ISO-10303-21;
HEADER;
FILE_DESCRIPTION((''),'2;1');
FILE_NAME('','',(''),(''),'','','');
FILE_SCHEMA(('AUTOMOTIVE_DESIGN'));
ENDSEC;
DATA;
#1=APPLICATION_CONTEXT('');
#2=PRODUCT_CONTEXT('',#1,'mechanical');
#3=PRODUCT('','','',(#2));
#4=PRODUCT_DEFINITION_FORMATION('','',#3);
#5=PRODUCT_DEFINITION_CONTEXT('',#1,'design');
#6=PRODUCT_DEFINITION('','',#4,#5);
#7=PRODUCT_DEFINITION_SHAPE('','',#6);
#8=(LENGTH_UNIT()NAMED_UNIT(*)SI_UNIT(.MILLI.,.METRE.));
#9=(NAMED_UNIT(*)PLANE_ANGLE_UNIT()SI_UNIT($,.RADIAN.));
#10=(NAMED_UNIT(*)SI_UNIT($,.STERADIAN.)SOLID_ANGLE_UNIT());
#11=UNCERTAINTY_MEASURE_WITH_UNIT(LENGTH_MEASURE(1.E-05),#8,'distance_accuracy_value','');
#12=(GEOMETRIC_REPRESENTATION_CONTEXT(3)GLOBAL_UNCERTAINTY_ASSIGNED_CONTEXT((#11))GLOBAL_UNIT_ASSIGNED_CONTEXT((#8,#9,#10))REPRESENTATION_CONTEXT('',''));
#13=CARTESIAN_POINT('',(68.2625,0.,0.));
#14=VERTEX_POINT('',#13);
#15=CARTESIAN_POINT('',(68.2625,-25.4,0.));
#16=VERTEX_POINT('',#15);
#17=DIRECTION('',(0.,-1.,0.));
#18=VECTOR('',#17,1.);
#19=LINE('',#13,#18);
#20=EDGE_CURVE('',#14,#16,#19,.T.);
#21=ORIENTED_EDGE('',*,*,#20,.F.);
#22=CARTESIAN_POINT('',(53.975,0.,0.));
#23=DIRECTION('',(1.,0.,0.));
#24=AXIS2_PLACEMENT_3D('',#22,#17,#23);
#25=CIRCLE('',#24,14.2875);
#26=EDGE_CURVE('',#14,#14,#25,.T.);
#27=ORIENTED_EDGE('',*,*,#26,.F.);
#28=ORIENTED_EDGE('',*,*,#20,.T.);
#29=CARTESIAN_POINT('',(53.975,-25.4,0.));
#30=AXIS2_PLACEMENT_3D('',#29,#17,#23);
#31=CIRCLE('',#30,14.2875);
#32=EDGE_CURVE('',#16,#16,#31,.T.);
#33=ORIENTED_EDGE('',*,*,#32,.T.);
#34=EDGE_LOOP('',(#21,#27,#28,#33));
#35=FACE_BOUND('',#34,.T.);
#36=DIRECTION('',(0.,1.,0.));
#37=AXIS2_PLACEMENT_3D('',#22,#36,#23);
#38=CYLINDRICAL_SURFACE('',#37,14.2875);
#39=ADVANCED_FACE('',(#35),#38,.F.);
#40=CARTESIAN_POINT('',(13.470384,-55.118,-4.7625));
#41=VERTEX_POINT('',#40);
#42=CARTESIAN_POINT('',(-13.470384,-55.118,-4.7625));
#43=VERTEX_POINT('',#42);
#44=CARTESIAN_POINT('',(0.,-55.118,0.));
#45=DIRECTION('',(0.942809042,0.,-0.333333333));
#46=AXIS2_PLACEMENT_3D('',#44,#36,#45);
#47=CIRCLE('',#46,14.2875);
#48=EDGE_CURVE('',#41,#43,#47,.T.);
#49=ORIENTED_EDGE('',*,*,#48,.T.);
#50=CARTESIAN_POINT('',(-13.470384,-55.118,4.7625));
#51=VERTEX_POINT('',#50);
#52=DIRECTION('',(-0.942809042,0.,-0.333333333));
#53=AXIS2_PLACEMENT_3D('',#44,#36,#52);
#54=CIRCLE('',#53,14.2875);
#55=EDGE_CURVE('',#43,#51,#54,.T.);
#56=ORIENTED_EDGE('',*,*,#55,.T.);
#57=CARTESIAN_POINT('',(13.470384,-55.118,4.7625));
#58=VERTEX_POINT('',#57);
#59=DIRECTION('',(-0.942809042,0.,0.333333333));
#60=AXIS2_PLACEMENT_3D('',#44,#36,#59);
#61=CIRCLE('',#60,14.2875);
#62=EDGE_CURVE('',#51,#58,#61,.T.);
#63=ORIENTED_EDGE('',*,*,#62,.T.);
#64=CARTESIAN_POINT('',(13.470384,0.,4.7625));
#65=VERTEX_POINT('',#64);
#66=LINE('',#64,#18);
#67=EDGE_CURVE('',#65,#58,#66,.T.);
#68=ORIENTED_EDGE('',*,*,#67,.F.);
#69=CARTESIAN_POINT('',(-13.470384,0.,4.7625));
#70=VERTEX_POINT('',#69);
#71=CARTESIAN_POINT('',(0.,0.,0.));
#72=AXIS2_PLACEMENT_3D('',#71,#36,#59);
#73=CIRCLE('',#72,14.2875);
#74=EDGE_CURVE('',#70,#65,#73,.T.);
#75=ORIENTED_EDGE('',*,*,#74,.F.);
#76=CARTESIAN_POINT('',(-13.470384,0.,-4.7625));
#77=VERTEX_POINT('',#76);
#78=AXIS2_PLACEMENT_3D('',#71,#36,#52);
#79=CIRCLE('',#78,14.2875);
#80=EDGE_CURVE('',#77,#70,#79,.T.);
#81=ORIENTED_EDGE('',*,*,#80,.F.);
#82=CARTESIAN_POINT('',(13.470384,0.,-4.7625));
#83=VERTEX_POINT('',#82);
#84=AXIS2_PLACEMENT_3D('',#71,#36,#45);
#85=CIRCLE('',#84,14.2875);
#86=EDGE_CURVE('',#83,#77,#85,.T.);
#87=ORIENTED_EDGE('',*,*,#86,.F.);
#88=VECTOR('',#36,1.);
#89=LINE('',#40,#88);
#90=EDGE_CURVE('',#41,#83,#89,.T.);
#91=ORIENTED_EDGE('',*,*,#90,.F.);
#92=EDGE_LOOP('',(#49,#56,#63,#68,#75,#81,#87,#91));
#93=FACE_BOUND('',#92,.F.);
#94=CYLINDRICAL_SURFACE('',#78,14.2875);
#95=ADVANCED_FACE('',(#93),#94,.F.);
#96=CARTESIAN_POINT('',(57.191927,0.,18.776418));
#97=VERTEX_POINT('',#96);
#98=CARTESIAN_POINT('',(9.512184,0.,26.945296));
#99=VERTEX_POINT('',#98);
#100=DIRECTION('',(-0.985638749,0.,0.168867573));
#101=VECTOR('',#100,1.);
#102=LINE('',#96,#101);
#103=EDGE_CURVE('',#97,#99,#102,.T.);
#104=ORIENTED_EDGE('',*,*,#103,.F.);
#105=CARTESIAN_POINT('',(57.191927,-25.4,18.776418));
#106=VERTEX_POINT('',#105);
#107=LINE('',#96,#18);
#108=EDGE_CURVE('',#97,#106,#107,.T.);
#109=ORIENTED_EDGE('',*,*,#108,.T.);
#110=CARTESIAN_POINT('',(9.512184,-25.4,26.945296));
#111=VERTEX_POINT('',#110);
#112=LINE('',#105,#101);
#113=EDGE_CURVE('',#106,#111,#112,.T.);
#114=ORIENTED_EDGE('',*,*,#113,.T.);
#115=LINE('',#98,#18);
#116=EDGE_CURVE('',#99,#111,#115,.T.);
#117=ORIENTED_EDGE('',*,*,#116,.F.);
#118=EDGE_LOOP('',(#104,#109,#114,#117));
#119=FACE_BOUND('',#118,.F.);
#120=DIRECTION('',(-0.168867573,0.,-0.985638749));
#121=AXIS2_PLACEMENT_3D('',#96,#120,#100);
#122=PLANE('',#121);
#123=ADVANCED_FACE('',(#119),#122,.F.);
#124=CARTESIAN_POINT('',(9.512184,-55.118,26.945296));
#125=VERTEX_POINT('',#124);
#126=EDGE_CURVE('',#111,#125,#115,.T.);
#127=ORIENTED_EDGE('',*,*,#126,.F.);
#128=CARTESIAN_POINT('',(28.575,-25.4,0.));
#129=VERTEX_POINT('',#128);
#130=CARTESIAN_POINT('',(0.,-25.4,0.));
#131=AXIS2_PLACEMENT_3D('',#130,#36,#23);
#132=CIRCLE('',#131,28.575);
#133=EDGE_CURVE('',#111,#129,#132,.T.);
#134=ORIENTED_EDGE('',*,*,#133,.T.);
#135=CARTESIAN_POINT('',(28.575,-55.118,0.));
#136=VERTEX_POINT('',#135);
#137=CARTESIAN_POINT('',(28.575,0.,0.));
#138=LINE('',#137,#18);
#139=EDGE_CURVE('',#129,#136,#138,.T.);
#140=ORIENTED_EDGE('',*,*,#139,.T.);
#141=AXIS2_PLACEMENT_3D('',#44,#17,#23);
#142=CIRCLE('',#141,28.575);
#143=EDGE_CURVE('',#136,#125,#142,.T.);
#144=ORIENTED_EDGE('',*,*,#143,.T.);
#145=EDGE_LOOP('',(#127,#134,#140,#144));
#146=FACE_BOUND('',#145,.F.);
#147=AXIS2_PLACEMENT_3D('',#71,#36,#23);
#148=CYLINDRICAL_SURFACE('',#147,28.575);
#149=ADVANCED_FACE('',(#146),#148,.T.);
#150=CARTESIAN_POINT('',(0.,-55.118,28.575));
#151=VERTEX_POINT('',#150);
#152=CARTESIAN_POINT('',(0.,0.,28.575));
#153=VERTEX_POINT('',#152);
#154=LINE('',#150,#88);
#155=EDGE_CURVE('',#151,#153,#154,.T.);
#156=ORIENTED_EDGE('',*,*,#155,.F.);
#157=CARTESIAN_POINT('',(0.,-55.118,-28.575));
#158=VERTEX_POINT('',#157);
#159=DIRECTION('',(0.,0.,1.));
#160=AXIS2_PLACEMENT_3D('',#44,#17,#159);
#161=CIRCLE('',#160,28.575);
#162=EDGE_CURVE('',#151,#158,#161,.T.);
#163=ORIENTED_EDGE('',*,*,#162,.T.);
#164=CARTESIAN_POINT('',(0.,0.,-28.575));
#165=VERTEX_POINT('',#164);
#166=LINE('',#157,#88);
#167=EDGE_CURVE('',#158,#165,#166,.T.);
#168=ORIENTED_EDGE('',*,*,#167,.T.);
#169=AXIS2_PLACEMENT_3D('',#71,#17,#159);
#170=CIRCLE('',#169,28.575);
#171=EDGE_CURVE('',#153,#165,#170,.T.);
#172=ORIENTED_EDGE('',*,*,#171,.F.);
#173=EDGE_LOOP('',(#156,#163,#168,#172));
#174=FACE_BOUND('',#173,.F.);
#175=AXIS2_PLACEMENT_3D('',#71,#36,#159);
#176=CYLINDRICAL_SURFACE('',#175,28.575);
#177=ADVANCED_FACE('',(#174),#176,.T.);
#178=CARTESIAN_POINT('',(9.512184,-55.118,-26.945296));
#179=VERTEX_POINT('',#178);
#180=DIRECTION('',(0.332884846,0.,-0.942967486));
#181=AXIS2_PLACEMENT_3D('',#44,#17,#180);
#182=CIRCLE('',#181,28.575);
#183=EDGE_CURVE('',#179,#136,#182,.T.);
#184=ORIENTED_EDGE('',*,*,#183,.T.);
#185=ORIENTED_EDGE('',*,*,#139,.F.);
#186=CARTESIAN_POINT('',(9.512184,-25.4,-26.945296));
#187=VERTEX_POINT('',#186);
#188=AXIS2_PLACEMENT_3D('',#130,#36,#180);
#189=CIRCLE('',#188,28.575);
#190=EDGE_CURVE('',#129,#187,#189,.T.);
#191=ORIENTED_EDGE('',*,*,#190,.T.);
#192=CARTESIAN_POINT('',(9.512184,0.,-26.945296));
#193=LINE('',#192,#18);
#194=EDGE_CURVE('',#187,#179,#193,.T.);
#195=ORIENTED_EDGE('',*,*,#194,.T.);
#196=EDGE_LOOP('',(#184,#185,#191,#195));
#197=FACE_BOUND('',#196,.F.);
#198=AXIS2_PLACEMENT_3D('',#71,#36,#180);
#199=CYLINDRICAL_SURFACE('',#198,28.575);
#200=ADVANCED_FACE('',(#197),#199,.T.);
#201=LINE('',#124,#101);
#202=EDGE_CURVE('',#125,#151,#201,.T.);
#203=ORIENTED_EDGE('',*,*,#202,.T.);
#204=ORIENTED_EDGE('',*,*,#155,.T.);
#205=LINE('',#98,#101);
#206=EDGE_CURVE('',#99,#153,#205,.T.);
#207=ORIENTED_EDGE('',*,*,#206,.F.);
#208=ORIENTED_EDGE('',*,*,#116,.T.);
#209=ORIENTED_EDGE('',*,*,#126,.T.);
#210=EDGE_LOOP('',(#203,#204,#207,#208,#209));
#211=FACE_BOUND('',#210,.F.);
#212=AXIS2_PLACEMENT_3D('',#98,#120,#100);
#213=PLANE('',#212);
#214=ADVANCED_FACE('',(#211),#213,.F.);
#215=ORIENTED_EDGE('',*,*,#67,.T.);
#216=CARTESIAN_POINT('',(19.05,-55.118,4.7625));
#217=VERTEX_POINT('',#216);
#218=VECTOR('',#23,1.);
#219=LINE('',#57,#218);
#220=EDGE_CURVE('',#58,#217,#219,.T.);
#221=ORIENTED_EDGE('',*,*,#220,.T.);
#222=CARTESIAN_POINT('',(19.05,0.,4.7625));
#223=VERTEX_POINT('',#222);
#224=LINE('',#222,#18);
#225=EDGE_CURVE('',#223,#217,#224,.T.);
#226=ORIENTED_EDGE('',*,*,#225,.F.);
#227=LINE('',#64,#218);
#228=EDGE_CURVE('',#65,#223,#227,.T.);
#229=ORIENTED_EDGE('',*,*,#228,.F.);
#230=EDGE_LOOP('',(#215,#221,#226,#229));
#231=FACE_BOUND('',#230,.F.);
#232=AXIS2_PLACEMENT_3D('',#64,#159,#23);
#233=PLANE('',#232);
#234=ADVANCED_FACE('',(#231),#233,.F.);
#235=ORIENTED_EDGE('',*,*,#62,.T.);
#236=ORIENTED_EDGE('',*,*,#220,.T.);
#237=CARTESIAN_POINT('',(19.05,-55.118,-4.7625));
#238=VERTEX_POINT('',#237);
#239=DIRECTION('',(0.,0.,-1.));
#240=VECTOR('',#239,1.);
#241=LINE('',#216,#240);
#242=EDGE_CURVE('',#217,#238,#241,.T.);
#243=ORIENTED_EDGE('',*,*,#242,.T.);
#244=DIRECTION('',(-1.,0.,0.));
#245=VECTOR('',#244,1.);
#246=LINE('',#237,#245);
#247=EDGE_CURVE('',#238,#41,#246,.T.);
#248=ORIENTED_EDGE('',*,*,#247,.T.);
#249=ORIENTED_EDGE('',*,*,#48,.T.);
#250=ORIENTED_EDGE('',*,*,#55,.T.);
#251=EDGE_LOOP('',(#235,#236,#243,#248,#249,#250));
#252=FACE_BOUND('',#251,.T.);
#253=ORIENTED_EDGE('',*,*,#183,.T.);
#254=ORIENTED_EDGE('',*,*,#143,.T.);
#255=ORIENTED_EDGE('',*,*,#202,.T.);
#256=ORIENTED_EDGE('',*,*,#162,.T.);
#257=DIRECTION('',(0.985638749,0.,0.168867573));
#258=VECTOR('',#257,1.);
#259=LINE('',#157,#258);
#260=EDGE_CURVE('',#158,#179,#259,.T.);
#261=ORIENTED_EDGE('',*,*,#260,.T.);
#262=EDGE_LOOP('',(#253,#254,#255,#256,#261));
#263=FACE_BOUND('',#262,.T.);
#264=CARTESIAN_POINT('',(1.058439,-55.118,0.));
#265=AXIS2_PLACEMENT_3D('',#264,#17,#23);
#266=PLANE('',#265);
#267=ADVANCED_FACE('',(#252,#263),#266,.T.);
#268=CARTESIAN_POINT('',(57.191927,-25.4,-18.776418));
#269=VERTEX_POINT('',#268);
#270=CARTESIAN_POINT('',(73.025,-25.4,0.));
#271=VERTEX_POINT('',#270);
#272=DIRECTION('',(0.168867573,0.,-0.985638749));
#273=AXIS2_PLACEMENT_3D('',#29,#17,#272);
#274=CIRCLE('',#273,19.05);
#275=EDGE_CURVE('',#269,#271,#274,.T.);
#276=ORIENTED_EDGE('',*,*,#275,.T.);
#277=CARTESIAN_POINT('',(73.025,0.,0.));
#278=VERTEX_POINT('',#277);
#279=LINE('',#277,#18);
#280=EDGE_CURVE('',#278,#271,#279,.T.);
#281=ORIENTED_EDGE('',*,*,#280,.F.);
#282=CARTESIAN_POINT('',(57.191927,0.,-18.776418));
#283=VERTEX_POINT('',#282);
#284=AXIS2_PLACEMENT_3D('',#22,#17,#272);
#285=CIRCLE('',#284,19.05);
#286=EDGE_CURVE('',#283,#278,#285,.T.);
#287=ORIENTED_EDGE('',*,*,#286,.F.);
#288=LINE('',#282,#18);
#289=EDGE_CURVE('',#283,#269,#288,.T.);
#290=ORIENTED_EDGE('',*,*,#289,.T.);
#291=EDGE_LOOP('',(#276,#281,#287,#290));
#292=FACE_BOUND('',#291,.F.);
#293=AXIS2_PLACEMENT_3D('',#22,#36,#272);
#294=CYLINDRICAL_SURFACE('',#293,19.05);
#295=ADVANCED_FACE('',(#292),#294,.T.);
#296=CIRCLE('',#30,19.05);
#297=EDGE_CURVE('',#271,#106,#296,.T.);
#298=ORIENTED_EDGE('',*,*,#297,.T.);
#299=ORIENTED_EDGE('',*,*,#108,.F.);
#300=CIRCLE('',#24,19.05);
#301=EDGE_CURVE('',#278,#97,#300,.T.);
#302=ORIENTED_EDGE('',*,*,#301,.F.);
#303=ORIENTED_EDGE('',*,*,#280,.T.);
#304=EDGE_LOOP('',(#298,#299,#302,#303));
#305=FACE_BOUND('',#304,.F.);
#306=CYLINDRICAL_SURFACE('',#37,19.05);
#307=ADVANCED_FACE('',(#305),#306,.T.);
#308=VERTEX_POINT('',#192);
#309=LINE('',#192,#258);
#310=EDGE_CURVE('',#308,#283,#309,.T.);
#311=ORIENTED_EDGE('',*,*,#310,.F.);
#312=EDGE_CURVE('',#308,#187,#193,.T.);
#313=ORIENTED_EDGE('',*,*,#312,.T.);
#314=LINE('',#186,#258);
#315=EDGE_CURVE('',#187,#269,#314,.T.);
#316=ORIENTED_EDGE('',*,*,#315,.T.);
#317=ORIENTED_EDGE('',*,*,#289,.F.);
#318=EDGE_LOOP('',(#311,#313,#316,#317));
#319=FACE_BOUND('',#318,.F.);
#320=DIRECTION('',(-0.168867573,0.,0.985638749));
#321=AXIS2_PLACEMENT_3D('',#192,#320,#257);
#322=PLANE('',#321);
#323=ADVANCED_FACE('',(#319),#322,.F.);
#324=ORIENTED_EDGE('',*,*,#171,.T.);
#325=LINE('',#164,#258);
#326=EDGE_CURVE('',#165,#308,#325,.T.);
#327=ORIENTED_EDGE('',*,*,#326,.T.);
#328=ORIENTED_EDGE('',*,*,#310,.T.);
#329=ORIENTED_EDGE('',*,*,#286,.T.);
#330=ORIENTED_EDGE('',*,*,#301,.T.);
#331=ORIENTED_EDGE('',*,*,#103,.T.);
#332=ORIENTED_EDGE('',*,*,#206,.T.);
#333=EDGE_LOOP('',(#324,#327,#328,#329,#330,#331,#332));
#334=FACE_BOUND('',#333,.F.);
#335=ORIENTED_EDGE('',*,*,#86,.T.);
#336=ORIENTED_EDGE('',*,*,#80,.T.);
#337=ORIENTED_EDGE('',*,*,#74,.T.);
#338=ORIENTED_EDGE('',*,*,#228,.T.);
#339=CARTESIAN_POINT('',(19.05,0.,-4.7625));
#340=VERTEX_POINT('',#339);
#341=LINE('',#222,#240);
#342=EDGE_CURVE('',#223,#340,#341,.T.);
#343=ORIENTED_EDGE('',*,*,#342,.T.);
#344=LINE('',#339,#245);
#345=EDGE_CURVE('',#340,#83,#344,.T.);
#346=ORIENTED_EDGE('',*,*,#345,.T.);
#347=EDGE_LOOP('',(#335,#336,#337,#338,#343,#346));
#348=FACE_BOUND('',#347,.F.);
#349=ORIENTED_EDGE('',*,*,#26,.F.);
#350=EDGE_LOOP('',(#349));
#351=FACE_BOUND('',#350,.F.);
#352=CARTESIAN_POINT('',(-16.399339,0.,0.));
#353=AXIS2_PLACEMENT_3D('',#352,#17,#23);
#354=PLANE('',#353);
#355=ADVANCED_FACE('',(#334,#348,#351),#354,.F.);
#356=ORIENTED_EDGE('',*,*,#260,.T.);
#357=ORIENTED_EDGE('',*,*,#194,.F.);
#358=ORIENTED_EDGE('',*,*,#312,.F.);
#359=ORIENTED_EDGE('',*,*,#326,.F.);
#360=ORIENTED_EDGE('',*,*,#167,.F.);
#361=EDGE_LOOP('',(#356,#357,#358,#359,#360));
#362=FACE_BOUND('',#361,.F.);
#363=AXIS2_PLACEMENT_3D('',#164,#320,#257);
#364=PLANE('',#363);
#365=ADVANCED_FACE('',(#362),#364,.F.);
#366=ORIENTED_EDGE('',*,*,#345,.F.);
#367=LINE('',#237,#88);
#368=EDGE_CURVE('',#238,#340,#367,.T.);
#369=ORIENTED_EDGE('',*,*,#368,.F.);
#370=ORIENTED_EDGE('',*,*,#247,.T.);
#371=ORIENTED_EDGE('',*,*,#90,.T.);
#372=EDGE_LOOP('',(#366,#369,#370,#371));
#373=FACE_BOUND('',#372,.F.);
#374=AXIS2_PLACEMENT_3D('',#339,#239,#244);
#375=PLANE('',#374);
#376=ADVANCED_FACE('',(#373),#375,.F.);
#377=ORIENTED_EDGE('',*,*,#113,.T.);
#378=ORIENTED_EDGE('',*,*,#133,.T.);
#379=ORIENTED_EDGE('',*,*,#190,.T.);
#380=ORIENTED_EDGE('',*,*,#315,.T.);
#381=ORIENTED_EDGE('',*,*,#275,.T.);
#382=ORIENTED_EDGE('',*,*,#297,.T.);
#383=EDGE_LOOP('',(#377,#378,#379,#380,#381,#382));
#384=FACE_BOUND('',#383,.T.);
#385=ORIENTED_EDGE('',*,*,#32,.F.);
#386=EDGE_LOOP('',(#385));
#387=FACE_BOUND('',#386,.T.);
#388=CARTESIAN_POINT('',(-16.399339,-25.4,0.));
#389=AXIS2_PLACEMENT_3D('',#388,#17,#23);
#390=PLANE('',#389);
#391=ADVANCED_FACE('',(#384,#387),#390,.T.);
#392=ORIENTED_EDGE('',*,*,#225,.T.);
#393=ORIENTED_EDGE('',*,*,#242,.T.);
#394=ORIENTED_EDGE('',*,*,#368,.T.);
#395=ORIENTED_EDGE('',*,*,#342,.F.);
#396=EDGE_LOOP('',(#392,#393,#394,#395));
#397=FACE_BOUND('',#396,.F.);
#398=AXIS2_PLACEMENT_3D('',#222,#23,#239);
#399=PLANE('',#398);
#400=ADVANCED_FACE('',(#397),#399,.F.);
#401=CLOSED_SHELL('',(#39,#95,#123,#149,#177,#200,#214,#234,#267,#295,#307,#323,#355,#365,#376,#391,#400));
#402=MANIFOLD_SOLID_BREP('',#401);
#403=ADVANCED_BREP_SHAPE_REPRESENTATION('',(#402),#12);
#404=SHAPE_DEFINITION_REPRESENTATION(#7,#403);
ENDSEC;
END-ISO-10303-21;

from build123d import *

# Parameters (mm, degrees)
F0_R     = 14.2875
F1_DEPTH = 25.4
F2_DEPTH = 25.4
F3_DEPTH = 55.118


with BuildPart() as f1:
    # F0 (on Front) → F1 (new body)
    with BuildSketch(Plane.XZ):
        with BuildLine():
            Line((9.5121844836, 26.9452959039), (0, 28.575))
            ThreePointArc((0, 28.575), (-28.575, 0), (0, -28.575))
            Line((0, -28.575), (9.5121844836, -26.9452959039))
            ThreePointArc((9.5121844836, -26.9452959039), (23.3274655355, -16.5033322905), (28.575, 0))
            ThreePointArc((28.575, 0), (23.3274655355, 16.5033322905), (9.5121844836, 26.9452959039))
        make_face()
        with BuildLine():
            ThreePointArc((-13.4703841816, 4.7625), (0, 14.2875), (13.4703841816, 4.7625))
            Line((13.4703841816, 4.7625), (19.05, 4.7625))
            Line((19.05, 4.7625), (19.05, -4.7625))
            Line((19.05, -4.7625), (13.4703841816, -4.7625))
            ThreePointArc((13.4703841816, -4.7625), (0, -14.2875), (-13.4703841816, -4.7625))
            Line((-13.4703841816, -4.7625), (-19.05, -4.7625))
            Line((-19.05, -4.7625), (-19.05, 4.7625))
            Line((-19.05, 4.7625), (-13.4703841816, 4.7625))
        make_face(mode=Mode.SUBTRACT)
        with BuildLine():
            Line((57.1919272622, 18.7764181619), (9.5121844836, 26.9452959039))
            ThreePointArc((9.5121844836, 26.9452959039), (23.3274655355, 16.5033322905), (28.575, 0))
            ThreePointArc((28.575, 0), (23.3274655355, -16.5033322905), (9.5121844836, -26.9452959039))
            Line((9.5121844836, -26.9452959039), (57.1919272622, -18.7764181619))
            ThreePointArc((57.1919272622, -18.7764181619), (34.925, 0), (57.1919272622, 18.7764181619))
        make_face()
        with BuildLine():
            ThreePointArc((73.025, 0), (68.5383952831, 12.2804730295), (57.1919272622, 18.7764181619))
            ThreePointArc((57.1919272622, 18.7764181619), (34.925, 0), (57.1919272622, -18.7764181619))
            ThreePointArc((57.1919272622, -18.7764181619), (68.5383952831, -12.2804730295), (73.025, 0))
        make_face()
        with Locations((53.975, 0)):
            Circle(F0_R, mode=Mode.SUBTRACT)
    extrude(amount=F1_DEPTH)

    # F0 (on Front) → F2 (join)
    with BuildSketch(Plane.XZ):
        with BuildLine():
            ThreePointArc((-13.4703841816, -4.7625), (-14.2875, 0), (-13.4703841816, 4.7625))
            Line((-13.4703841816, 4.7625), (-19.05, 4.7625))
            Line((-19.05, 4.7625), (-19.05, -4.7625))
            Line((-19.05, -4.7625), (-13.4703841816, -4.7625))
        make_face()
    extrude(amount=F2_DEPTH)

    # F0 (on Front) → F3 (join)
    with BuildSketch(Plane.XZ):
        with BuildLine():
            Line((9.5121844836, 26.9452959039), (0, 28.575))
            ThreePointArc((0, 28.575), (-28.575, 0), (0, -28.575))
            Line((0, -28.575), (9.5121844836, -26.9452959039))
            ThreePointArc((9.5121844836, -26.9452959039), (23.3274655355, -16.5033322905), (28.575, 0))
            ThreePointArc((28.575, 0), (23.3274655355, 16.5033322905), (9.5121844836, 26.9452959039))
        make_face()
        with BuildLine():
            ThreePointArc((-13.4703841816, 4.7625), (0, 14.2875), (13.4703841816, 4.7625))
            Line((13.4703841816, 4.7625), (19.05, 4.7625))
            Line((19.05, 4.7625), (19.05, -4.7625))
            Line((19.05, -4.7625), (13.4703841816, -4.7625))
            ThreePointArc((13.4703841816, -4.7625), (0, -14.2875), (-13.4703841816, -4.7625))
            Line((-13.4703841816, -4.7625), (-19.05, -4.7625))
            Line((-19.05, -4.7625), (-19.05, 4.7625))
            Line((-19.05, 4.7625), (-13.4703841816, 4.7625))
        make_face(mode=Mode.SUBTRACT)
        with BuildLine():
            ThreePointArc((-13.4703841816, -4.7625), (-14.2875, 0), (-13.4703841816, 4.7625))
            Line((-13.4703841816, 4.7625), (-19.05, 4.7625))
            Line((-19.05, 4.7625), (-19.05, -4.7625))
            Line((-19.05, -4.7625), (-13.4703841816, -4.7625))
        make_face()
    extrude(amount=F3_DEPTH)


solid = f1.part
